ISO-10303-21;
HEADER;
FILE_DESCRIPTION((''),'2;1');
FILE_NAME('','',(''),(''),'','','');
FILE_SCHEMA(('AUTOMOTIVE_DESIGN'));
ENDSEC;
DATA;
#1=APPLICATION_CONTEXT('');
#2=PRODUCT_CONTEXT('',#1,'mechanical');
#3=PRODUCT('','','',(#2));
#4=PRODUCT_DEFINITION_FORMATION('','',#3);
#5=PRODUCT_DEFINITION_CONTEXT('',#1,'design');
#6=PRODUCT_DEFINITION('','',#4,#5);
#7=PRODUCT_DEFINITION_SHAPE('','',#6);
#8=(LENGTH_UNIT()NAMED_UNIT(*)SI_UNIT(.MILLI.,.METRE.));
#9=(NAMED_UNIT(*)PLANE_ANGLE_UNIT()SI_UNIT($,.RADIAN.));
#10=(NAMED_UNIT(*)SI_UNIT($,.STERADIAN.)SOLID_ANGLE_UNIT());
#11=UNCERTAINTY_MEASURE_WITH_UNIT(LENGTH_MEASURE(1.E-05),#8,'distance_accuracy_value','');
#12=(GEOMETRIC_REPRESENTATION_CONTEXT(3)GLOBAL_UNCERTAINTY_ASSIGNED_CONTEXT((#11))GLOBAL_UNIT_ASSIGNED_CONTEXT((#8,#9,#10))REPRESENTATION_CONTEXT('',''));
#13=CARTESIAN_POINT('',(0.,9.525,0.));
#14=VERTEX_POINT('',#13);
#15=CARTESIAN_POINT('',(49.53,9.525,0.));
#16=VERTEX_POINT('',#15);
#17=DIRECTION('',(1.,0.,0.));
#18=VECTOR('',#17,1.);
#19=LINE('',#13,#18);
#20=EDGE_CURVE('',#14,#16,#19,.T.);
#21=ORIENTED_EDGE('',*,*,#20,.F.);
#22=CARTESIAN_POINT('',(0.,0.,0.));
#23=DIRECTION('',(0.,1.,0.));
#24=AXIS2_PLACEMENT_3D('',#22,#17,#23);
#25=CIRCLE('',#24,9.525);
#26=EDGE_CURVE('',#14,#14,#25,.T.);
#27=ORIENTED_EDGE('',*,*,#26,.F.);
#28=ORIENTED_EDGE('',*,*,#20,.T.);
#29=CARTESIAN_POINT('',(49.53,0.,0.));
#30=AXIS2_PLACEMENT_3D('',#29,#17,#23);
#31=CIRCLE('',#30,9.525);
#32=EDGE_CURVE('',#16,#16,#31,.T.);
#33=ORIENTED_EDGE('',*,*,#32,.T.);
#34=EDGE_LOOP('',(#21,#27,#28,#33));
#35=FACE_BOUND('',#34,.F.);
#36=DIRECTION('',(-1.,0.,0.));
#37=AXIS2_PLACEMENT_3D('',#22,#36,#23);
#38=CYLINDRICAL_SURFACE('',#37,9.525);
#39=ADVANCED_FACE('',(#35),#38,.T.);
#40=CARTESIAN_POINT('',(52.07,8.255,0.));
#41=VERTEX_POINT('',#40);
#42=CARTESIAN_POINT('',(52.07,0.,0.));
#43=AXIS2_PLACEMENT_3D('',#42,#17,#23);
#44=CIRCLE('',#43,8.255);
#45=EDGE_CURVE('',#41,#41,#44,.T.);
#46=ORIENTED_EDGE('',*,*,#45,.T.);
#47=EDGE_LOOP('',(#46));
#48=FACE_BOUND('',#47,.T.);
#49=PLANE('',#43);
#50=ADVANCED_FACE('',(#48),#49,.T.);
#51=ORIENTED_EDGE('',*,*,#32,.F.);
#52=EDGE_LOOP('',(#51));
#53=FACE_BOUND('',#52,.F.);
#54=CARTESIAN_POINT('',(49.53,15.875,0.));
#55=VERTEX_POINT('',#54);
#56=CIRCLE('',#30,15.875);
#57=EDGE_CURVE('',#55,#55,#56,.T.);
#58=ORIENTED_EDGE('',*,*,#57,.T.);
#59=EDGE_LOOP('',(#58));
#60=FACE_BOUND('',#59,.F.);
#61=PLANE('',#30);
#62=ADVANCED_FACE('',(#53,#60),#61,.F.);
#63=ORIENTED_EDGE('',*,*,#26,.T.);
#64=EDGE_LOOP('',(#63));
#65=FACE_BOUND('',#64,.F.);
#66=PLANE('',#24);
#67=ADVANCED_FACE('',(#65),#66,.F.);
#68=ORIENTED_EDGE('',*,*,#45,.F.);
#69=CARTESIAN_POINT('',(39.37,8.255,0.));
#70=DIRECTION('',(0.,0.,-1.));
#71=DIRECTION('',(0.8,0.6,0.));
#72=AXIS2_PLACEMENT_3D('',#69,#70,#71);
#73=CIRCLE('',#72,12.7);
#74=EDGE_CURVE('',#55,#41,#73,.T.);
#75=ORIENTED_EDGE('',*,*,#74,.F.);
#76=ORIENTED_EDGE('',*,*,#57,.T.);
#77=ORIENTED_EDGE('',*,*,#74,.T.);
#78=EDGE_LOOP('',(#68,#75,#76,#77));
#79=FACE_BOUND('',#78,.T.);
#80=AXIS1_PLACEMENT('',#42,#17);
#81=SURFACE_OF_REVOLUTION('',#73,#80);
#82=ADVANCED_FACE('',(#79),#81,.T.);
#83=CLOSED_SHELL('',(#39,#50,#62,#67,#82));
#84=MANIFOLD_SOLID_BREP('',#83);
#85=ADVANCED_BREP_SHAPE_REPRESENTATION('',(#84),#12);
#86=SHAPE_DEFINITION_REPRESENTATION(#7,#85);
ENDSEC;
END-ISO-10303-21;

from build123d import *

# Parameters (mm, degrees)
F0_R     = 9.525
F1_DEPTH = 49.53
F2_R     = 15.875
F2_R_2   = 9.525
F3_DEPTH = 2.54


# Not quite as in the source:
# - a fillet or chamfer that OpenCascade refuses, or shapes differently, is made with other operations: its cross-section is extruded or revolved along the edge and cut away or added


with BuildPart() as f1:
    # F0 (on Right) → F1 (new body)
    with BuildSketch(Plane.YZ):
        Circle(F0_R)
    extrude(amount=F1_DEPTH)

    # F2 (on face) → F3 (join)
    with BuildSketch(Plane.YZ.offset(49.53)):
        Circle(F2_R)
        Circle(F2_R_2, mode=Mode.SUBTRACT)
        Circle(F2_R_2)
    extrude(amount=F3_DEPTH)

    # F4: fillet of radius 12.7 on 1 edges, made by hand

    # F4_s1 → F4_t2 (revolve, cut)
    with BuildSketch(Plane.XY):
        with BuildLine():
            ThreePointArc((49.53, 15.875), (51.4182778852, 12.2710926284), (52.07, 8.255))
            Line((52.07, 8.255), (52.07, 15.875))
            Line((52.07, 15.875), (49.53, 15.875))
        make_face()
    revolve(axis=Axis((52.07, 0, 0), (1, 0, 0)), mode=Mode.SUBTRACT)


solid = f1.part
